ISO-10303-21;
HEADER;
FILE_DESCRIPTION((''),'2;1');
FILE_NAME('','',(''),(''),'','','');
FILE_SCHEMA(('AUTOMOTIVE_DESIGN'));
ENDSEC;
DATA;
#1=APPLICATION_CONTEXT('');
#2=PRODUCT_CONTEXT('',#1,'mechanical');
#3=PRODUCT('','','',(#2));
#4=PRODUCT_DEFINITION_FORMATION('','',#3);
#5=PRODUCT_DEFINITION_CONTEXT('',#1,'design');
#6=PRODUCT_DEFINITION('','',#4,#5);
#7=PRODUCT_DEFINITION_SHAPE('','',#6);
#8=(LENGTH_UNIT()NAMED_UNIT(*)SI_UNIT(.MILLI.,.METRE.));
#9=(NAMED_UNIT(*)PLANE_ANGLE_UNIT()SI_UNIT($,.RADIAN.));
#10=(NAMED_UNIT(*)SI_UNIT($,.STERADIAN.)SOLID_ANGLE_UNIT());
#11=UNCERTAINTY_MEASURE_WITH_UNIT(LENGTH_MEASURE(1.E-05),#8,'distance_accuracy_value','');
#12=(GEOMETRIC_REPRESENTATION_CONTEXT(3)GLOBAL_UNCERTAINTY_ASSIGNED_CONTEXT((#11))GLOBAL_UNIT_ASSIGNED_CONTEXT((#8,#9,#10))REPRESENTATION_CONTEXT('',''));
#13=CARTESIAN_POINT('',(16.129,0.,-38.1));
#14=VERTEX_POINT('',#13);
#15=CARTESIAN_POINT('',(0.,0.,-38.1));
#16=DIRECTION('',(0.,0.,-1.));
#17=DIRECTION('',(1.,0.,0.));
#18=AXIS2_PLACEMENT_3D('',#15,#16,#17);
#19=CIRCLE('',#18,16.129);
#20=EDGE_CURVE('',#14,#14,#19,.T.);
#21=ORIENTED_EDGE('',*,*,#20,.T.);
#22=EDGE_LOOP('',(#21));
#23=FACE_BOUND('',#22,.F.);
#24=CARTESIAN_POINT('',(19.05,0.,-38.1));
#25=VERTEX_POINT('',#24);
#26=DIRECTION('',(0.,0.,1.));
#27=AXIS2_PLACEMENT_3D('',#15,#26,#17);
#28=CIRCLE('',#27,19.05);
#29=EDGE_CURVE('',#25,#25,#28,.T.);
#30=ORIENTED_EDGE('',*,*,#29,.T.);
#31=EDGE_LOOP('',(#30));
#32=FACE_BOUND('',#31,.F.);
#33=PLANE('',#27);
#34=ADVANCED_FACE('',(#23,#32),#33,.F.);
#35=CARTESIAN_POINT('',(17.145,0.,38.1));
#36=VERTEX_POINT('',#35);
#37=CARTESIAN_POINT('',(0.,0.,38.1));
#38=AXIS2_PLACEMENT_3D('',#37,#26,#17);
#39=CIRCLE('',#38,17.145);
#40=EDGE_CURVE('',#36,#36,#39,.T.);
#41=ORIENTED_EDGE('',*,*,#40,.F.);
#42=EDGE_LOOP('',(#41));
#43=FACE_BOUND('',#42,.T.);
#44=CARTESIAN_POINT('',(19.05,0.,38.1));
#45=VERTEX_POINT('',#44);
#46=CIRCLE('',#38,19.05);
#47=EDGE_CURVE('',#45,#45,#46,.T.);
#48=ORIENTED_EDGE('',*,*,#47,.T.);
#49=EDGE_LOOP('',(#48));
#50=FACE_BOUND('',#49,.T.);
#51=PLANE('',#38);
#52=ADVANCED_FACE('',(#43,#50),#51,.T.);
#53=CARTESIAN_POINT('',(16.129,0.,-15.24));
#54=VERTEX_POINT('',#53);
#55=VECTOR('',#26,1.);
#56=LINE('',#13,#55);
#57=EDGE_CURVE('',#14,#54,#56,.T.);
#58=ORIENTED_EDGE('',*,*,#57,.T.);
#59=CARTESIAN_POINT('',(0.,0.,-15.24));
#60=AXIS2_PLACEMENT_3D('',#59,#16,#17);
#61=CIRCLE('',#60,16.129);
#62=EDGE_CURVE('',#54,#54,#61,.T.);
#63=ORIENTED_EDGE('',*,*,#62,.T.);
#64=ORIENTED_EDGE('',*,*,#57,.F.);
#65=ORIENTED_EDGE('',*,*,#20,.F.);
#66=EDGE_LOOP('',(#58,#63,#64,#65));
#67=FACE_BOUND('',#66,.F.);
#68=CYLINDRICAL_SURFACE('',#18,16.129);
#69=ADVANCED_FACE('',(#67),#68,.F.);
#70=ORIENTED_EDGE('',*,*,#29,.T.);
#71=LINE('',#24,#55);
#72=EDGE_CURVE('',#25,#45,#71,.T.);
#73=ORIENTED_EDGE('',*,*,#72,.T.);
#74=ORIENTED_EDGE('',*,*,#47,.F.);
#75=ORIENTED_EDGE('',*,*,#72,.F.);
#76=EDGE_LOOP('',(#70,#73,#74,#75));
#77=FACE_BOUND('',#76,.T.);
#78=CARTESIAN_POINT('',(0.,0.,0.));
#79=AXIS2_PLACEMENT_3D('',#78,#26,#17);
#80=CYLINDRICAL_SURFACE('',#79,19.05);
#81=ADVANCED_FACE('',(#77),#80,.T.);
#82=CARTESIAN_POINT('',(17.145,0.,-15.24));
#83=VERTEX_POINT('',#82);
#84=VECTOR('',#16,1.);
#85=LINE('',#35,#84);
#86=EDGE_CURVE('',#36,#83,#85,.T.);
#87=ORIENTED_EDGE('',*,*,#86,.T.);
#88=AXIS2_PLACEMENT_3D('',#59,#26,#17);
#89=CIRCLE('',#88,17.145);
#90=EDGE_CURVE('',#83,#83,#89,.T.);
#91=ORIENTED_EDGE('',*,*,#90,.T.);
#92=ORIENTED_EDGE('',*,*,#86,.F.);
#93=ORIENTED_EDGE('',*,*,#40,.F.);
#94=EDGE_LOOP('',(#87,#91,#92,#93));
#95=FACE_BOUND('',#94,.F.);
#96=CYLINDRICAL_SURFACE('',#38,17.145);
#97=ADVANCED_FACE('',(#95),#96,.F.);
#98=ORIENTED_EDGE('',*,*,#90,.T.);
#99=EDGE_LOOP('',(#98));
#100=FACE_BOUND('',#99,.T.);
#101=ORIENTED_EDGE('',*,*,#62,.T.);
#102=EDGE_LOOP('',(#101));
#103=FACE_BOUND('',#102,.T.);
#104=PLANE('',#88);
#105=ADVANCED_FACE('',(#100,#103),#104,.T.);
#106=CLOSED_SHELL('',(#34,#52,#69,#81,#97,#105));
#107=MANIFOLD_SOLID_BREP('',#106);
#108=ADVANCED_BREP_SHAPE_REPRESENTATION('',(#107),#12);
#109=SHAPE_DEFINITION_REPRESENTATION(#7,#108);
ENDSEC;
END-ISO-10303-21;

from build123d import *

# Parameters (mm, degrees)
F0_R     = 19.05
F1_DEPTH = 38.1
F3_R     = 16.129
F4_DEPTH = 22.86
F5_R     = 17.145
F6_DEPTH = 53.34


with BuildPart() as f1:
    # F0 (on Top) → F1 (new body, symmetric)
    with BuildSketch(Plane.XY):
        Circle(F0_R)
    extrude(amount=F1_DEPTH, both=True)

    # F3 (on face) → F4 (cut)
    with BuildSketch(Plane(origin=(0, 0, -38.1), x_dir=(1, 0, 0), z_dir=(0, 0, -1))):
        Circle(F3_R)
    extrude(amount=-F4_DEPTH, mode=Mode.SUBTRACT)

    # F5 (on face) → F6 (cut)
    with BuildSketch(Plane.XY.offset(38.1)):
        Circle(F5_R)
    extrude(amount=-F6_DEPTH, mode=Mode.SUBTRACT)


solid = f1.part
